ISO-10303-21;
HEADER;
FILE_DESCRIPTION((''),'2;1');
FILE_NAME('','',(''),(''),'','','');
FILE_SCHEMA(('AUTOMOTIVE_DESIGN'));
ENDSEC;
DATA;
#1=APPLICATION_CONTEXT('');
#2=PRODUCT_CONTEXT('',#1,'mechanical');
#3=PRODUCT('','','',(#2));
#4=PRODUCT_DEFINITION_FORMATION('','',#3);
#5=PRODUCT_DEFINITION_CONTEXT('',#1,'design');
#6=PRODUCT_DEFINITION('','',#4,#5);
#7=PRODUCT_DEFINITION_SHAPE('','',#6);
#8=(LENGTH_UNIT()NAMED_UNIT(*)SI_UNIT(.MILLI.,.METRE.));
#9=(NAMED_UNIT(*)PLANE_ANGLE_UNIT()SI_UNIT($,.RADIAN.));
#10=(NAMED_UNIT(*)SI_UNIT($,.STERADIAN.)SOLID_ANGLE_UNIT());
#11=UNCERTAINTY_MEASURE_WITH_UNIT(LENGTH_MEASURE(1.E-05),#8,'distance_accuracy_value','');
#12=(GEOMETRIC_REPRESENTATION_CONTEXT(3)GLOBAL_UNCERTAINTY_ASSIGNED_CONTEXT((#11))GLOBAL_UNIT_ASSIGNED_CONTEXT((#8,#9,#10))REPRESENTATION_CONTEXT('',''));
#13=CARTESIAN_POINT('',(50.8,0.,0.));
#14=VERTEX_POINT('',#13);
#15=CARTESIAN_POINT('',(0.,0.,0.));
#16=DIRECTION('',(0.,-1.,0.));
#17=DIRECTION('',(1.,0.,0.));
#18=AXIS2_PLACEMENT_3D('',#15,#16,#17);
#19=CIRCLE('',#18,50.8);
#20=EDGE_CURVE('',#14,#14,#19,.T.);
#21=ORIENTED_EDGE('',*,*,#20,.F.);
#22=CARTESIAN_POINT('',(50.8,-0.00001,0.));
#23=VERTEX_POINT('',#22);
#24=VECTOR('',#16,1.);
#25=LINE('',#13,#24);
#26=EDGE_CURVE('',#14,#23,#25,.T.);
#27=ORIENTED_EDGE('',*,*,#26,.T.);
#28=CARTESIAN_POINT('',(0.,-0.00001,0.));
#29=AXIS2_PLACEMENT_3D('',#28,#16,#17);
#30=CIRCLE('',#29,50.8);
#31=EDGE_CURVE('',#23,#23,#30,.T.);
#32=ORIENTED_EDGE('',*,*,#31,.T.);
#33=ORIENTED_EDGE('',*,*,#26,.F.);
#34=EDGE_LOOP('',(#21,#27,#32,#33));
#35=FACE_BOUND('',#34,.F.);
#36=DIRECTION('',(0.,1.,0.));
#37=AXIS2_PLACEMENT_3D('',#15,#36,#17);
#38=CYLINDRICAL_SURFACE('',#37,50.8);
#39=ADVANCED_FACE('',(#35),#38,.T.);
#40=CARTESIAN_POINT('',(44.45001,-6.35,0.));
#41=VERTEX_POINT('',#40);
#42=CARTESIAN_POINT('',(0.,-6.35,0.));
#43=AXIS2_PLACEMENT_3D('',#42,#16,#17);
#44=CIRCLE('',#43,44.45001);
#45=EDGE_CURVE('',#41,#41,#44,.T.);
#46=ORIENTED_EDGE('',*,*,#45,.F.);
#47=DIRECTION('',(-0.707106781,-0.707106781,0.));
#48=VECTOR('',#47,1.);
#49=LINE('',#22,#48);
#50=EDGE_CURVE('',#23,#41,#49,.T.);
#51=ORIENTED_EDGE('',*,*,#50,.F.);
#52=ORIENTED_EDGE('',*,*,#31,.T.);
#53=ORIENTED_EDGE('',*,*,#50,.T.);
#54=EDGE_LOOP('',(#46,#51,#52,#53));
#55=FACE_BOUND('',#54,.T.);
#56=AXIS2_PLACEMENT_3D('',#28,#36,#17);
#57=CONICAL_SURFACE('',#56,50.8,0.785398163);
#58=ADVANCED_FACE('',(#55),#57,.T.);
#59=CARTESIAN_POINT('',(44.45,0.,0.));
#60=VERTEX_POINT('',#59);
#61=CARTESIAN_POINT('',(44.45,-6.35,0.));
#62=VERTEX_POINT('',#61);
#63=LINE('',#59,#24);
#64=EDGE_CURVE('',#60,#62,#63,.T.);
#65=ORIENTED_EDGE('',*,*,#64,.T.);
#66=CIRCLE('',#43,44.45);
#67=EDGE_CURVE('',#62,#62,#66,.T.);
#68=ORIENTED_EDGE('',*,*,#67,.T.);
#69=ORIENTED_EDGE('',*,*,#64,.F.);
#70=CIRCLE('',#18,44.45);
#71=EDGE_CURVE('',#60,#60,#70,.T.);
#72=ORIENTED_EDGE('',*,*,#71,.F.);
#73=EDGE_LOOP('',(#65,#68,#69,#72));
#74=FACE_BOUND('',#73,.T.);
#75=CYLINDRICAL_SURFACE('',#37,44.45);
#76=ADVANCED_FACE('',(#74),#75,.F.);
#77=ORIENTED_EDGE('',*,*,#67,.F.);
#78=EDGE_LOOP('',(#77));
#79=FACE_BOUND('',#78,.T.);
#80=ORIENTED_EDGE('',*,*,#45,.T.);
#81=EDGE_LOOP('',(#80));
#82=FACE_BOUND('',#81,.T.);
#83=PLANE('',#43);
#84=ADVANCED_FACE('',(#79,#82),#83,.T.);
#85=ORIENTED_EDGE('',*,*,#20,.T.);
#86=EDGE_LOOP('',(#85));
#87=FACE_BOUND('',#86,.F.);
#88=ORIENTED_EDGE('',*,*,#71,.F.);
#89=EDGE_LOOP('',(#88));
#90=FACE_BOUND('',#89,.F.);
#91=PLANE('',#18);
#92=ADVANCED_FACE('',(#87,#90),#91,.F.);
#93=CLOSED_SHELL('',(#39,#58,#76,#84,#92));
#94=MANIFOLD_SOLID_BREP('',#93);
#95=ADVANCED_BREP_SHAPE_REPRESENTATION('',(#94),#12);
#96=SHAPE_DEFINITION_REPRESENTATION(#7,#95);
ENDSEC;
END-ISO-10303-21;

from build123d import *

# Parameters (mm, degrees)
F0_R     = 50.8
F0_R_2   = 44.45
F1_DEPTH = 6.35
F2_SIZE  = 6.34999


# Not quite as in the source:
# - a fillet or chamfer is up to 0.001 mm smaller than in the source, because OpenCascade refuses the exact size


with BuildPart() as f1:
    # F0 (on Front) → F1 (new body)
    with BuildSketch(Plane.XZ):
        Circle(F0_R)
        Circle(F0_R_2, mode=Mode.SUBTRACT)
    extrude(amount=F1_DEPTH)

    # F2 (size 6.35 in the source; OpenCascade refuses exactly that, so slightly less here)
    f2_edges = [f1.edges().sort_by_distance(p)[0] for p in [
        (-50.8, -6.35, 0),
    ]]
    chamfer(f2_edges, length=F2_SIZE)


solid = f1.part
